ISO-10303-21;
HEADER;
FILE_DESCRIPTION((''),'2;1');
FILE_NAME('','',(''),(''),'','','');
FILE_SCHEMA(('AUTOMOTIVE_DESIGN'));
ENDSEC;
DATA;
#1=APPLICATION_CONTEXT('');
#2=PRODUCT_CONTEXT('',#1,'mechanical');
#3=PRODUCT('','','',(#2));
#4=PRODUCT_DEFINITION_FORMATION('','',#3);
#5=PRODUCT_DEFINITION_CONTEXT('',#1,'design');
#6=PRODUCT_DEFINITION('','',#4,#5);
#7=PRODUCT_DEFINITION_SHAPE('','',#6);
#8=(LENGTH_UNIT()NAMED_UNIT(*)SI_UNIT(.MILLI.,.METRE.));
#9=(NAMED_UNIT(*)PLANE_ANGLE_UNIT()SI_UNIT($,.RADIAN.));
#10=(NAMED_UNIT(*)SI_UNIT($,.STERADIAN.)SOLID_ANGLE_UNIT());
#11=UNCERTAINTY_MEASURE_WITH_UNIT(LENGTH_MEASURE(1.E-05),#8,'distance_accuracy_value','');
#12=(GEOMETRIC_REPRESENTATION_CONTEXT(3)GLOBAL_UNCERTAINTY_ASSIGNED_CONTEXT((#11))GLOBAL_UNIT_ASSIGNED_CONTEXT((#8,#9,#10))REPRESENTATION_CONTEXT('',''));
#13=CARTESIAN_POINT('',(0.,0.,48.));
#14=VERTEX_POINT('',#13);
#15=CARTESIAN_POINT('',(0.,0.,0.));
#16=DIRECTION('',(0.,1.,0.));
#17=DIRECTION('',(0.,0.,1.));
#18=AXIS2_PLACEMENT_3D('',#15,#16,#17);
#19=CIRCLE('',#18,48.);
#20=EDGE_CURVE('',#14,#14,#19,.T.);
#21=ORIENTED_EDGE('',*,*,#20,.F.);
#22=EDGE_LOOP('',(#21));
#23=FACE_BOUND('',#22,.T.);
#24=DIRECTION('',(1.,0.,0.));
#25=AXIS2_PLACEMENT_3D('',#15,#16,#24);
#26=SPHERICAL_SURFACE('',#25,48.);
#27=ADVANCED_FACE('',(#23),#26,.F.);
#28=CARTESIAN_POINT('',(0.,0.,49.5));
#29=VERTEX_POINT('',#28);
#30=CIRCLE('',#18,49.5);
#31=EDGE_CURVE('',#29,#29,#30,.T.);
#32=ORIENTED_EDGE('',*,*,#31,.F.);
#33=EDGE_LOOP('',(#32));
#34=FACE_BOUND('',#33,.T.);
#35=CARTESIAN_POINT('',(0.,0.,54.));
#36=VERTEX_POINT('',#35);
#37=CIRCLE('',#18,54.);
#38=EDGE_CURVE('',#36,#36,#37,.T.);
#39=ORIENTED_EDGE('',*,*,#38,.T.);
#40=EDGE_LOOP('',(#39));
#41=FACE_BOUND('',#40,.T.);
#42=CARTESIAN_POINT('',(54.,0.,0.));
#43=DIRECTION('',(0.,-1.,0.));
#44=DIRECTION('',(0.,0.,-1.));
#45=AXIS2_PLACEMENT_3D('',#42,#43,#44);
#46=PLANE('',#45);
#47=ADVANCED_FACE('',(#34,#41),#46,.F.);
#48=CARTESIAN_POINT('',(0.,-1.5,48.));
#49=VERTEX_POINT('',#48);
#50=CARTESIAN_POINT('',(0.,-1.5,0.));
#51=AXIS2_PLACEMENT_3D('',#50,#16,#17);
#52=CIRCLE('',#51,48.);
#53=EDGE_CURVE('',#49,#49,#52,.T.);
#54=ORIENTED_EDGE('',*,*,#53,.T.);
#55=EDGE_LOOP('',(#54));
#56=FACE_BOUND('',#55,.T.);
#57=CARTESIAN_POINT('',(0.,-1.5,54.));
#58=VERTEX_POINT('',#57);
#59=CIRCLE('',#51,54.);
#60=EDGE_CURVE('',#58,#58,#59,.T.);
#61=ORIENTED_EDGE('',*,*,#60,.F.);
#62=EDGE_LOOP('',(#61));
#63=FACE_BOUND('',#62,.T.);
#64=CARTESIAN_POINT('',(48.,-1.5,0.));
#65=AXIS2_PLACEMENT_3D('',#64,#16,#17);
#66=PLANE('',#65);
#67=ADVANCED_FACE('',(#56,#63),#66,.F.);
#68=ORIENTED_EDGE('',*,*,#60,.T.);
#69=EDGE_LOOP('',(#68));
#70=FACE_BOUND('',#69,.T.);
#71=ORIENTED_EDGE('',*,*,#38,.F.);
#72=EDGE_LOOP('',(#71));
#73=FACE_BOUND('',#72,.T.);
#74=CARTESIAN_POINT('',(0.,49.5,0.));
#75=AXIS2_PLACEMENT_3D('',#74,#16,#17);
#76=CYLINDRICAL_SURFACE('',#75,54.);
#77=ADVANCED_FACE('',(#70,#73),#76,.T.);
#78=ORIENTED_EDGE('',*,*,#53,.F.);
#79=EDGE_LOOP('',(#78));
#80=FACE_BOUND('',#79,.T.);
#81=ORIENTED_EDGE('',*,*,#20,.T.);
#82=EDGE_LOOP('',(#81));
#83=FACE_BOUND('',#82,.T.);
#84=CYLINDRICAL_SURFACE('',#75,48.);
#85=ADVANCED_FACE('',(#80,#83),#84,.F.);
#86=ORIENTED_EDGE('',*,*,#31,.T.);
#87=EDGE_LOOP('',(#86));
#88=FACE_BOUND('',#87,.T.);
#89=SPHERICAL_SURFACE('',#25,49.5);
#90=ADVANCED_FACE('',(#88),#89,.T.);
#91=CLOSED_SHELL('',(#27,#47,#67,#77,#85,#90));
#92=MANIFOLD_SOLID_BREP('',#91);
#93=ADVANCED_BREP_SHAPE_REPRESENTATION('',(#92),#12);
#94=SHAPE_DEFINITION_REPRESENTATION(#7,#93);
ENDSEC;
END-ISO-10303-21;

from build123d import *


with BuildPart() as part:
    # Sketch1 → Revolve1 (revolve)
    with BuildSketch(Plane.XY):
        with BuildLine():
            Line((0, 49.5), (0, 48))
            ThreePointArc((0, 48), (33.941125497, 33.941125497), (48, 0))
            Line((48, 0), (48, -1.5))
            Line((48, -1.5), (54, -1.5))
            Line((54, -1.5), (54, 0))
            Line((54, 0), (49.5, 0))
            ThreePointArc((49.5, 0), (35.001785669, 35.001785669), (0, 49.5))
        make_face()
    revolve(axis=Axis((0, 49.5, 0), (0, -1, 0)))


solid = part.part
